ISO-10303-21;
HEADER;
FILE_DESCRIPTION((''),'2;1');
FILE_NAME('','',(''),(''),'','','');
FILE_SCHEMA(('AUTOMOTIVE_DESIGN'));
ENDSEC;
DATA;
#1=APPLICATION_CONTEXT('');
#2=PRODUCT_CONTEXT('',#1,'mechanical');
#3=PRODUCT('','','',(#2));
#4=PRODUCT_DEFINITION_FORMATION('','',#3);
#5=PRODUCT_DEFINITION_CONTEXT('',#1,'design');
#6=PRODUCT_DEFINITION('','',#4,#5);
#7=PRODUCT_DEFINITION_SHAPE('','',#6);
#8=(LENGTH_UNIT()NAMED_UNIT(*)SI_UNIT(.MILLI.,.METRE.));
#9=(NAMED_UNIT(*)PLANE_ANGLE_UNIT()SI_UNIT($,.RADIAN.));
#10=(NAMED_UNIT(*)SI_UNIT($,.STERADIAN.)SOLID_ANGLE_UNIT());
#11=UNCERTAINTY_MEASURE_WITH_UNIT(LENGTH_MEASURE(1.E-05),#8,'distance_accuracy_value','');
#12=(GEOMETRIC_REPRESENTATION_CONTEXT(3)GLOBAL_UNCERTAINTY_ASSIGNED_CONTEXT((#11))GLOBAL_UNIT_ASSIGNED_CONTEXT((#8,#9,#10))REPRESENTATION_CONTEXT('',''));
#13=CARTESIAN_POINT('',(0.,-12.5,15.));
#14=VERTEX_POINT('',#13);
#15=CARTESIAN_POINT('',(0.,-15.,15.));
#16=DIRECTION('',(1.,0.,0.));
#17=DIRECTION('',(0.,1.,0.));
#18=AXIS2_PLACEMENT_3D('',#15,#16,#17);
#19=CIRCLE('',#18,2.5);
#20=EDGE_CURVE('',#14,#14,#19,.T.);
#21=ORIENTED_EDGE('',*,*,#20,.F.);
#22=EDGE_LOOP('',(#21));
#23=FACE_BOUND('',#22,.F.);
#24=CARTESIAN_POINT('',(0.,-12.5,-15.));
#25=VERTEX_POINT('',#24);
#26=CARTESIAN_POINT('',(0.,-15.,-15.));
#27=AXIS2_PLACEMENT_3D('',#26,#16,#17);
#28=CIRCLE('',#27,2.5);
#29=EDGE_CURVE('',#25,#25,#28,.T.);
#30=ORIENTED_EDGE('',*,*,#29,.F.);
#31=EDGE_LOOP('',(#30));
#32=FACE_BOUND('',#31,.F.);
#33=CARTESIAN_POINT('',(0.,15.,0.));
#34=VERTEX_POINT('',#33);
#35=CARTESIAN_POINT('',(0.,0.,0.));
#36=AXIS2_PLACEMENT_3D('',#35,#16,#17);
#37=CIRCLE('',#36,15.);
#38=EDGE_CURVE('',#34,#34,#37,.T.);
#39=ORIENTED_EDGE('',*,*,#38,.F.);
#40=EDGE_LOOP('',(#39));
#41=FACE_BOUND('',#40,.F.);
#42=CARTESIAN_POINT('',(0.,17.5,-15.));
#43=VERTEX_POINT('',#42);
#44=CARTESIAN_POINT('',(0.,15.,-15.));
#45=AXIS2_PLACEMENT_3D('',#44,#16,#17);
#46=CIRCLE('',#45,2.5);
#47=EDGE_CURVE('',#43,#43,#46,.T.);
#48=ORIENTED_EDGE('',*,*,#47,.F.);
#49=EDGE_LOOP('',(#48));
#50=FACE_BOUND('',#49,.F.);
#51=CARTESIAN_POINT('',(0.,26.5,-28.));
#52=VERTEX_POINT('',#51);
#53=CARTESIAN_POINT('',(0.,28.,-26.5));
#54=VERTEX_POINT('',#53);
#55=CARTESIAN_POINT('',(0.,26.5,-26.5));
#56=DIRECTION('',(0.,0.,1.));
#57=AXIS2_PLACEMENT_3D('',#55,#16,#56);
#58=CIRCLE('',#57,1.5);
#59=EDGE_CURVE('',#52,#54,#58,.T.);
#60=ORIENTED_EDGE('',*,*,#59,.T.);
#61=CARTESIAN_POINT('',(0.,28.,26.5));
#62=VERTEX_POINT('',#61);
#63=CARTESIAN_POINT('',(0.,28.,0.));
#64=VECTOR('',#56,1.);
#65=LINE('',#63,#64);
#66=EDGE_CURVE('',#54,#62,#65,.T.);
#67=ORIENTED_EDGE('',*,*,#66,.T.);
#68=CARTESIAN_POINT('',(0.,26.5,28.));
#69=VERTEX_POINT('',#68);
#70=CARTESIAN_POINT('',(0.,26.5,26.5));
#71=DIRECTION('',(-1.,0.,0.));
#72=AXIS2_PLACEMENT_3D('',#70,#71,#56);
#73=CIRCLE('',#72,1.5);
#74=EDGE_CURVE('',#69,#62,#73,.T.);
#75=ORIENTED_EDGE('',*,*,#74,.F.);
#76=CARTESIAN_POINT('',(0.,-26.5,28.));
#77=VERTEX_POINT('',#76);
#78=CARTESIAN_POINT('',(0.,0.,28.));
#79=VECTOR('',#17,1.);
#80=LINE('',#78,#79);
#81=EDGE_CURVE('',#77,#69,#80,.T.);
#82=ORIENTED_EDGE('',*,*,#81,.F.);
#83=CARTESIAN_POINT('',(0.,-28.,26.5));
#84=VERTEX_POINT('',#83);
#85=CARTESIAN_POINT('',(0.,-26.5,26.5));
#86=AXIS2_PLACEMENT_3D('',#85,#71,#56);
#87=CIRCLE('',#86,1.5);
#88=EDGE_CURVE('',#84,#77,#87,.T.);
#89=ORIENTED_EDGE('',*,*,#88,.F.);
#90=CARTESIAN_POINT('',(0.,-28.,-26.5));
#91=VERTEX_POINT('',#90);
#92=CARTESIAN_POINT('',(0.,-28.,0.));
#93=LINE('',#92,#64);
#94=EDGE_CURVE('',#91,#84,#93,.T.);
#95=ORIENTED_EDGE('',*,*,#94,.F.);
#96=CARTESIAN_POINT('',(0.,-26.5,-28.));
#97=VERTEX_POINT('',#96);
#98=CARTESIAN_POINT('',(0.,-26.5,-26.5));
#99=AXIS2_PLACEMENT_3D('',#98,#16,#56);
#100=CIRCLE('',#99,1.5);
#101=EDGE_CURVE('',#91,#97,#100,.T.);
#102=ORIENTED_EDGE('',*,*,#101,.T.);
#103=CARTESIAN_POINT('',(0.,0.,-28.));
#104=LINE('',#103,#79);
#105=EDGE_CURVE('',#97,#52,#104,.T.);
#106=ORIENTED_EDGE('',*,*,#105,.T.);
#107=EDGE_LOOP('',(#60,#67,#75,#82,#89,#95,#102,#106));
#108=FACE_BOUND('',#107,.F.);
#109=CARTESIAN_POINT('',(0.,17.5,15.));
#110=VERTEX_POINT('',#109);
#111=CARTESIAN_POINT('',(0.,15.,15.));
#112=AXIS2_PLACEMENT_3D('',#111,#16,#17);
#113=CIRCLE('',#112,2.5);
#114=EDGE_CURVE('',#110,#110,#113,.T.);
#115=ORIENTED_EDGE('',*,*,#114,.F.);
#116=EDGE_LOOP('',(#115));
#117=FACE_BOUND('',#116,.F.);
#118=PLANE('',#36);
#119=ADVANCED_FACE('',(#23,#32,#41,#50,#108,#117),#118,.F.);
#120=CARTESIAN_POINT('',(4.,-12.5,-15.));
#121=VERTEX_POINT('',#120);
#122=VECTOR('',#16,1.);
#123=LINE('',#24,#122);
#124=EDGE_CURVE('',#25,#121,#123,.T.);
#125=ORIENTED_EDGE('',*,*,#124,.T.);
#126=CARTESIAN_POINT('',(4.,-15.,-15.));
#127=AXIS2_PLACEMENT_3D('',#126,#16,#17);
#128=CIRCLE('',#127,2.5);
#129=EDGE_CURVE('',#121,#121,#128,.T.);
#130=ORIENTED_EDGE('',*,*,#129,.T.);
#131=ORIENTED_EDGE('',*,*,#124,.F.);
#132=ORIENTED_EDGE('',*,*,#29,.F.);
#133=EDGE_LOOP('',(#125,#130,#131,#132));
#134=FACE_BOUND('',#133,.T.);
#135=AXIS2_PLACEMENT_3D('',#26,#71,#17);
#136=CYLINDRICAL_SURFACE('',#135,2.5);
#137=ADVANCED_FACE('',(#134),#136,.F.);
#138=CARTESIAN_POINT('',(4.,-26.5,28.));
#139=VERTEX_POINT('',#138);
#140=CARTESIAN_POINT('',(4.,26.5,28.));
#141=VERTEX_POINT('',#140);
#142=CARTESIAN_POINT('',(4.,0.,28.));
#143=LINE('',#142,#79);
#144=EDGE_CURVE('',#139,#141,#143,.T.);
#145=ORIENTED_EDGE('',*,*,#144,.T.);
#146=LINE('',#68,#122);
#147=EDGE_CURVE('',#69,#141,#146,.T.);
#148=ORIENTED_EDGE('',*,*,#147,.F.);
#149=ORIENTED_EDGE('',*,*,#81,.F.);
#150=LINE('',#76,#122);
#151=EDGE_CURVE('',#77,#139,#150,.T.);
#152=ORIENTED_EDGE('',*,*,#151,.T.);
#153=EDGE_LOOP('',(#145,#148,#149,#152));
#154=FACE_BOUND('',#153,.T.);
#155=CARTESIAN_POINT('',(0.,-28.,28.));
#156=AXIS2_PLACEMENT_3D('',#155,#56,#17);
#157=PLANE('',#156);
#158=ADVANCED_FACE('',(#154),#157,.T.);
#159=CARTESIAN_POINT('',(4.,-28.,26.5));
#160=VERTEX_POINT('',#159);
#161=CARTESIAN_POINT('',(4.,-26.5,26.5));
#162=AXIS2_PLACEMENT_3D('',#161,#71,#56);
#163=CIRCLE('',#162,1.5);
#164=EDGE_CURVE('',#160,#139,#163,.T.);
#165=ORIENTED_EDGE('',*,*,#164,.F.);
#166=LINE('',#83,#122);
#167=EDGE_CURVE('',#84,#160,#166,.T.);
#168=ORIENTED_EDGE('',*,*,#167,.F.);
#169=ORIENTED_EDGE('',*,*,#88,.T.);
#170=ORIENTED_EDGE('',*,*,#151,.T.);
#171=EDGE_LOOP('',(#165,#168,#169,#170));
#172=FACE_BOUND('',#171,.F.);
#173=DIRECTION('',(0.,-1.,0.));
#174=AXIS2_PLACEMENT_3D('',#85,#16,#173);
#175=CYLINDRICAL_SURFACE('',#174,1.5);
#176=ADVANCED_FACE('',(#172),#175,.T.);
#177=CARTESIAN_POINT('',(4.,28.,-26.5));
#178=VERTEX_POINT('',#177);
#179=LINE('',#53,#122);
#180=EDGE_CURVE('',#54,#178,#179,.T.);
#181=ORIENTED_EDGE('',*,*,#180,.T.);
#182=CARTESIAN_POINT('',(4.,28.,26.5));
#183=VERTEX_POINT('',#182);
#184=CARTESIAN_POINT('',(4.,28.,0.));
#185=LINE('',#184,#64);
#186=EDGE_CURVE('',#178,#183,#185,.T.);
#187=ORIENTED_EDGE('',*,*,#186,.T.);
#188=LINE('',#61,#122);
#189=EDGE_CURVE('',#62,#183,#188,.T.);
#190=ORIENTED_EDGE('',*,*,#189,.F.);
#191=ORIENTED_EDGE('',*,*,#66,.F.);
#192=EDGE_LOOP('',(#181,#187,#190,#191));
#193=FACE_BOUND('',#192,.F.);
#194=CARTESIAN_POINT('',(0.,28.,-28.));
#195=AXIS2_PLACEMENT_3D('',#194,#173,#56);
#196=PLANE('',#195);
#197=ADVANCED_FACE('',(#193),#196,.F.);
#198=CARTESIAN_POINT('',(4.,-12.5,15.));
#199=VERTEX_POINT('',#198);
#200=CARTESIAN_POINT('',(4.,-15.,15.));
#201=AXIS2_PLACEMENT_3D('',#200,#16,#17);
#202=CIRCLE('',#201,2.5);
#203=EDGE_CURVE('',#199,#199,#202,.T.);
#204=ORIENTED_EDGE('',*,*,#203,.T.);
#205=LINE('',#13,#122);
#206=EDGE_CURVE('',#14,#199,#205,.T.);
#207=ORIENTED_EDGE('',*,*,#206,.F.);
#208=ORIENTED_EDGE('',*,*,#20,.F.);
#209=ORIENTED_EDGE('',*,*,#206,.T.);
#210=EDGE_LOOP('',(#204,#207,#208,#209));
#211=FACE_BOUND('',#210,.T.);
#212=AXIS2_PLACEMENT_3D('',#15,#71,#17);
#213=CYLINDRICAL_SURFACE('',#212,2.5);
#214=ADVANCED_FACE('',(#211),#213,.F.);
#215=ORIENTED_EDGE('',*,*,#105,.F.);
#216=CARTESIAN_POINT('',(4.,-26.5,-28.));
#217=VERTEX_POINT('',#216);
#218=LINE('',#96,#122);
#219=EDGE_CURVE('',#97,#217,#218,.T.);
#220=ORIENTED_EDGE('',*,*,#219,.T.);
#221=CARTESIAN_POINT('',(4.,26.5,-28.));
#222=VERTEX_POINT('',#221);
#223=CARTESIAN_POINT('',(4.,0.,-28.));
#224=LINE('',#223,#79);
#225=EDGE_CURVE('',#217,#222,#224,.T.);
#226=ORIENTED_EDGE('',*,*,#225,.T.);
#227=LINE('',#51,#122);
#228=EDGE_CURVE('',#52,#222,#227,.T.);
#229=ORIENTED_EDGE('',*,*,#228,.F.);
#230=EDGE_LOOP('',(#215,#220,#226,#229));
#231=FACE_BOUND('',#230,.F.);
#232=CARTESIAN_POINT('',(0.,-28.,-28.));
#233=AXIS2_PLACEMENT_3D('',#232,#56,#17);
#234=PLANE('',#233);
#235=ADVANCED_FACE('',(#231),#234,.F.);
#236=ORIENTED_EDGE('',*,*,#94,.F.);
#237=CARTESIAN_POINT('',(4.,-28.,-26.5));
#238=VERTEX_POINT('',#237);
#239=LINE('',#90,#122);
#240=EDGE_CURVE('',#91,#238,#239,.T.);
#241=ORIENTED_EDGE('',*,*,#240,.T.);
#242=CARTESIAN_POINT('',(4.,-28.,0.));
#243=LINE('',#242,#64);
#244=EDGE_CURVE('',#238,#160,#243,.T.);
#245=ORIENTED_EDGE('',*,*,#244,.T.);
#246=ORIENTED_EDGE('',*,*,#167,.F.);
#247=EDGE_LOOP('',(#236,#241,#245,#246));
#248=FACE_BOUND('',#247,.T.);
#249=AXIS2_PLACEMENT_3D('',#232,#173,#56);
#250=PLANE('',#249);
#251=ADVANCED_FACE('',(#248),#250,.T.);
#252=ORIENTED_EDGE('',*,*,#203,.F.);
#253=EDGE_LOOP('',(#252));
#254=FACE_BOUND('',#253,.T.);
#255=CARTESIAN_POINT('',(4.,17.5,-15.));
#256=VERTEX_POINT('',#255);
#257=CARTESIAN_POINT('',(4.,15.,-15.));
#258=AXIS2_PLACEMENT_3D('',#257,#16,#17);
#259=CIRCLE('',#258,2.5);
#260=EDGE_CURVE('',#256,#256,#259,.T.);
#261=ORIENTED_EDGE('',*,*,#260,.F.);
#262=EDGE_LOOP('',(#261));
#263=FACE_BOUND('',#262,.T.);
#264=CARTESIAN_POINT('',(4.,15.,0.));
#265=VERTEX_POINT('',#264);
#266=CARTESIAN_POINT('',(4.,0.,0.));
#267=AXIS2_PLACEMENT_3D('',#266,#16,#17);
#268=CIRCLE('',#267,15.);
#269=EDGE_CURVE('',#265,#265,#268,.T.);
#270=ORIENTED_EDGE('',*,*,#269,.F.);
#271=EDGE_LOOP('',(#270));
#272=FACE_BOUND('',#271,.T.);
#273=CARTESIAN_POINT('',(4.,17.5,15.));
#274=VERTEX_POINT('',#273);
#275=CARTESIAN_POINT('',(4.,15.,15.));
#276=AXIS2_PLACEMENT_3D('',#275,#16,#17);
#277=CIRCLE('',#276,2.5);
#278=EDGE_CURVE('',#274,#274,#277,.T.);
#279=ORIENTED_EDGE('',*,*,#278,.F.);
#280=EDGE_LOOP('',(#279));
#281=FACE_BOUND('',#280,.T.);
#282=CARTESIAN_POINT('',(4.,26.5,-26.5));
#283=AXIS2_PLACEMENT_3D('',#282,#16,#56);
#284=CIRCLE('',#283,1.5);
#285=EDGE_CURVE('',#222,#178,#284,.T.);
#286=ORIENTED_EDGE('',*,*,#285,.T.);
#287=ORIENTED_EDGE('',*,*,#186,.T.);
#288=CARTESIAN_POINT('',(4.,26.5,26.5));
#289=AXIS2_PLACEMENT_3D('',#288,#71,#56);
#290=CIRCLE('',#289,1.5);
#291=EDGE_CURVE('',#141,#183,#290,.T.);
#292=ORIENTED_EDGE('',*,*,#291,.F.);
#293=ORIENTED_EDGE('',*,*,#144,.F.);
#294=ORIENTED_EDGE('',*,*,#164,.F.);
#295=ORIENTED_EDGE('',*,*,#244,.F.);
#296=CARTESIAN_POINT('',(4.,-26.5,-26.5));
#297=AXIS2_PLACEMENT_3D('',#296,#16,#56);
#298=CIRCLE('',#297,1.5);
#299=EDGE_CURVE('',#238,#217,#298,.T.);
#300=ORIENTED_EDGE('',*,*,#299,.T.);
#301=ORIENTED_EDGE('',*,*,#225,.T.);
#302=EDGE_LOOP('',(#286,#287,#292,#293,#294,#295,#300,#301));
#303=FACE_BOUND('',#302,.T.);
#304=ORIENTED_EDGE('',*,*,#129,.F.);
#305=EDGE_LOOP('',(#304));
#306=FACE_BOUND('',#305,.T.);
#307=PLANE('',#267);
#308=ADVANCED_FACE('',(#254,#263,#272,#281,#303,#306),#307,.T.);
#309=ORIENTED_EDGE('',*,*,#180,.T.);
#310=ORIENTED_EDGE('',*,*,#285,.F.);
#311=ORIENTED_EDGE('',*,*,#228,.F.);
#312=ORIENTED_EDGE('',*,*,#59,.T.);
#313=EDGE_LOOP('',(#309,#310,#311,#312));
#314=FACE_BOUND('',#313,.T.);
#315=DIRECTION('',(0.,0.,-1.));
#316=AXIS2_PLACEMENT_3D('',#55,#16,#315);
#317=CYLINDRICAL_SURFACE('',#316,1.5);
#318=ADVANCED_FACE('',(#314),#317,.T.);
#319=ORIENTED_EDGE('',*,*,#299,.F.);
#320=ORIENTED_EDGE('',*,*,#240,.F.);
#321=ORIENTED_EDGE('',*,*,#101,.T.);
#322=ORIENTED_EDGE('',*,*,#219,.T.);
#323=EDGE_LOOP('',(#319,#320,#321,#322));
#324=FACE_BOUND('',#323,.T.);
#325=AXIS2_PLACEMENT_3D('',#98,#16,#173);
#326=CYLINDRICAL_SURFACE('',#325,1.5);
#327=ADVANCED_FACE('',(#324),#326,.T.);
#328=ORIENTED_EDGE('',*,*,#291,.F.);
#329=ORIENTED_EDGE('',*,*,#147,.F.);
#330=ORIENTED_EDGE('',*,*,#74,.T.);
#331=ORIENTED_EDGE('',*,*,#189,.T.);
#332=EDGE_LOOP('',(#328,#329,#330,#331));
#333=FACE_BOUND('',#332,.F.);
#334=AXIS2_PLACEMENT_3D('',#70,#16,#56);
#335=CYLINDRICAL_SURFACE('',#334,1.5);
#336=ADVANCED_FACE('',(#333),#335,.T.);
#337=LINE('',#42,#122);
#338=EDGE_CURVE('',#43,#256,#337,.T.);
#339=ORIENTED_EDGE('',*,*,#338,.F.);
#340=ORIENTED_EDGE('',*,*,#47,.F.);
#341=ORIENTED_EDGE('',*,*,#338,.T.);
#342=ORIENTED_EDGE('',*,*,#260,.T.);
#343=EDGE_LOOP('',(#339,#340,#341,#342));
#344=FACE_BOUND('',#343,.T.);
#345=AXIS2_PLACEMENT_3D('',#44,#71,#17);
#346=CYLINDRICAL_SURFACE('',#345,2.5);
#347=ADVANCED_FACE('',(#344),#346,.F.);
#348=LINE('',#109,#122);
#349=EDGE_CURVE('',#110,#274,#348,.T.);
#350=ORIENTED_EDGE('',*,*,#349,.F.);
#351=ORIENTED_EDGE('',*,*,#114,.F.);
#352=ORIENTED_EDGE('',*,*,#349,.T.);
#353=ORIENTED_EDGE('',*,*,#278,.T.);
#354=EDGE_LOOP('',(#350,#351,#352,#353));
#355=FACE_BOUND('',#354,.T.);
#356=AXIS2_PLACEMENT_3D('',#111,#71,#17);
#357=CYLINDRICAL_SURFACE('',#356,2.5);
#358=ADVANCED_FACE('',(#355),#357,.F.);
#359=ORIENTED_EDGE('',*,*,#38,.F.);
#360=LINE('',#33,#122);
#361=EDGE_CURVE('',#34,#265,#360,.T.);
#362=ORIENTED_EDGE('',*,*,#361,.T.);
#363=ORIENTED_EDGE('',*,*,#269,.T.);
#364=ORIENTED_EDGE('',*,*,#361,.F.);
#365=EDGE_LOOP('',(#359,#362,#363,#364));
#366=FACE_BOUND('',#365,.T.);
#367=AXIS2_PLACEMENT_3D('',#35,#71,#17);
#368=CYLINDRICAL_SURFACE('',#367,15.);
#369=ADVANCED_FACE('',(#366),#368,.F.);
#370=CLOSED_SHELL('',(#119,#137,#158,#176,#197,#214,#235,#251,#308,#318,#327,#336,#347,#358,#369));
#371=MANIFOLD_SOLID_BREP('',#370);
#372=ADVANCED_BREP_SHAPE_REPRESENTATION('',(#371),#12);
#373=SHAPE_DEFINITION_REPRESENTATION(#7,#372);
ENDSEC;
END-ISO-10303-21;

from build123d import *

# Parameters (mm, degrees)
F0_W     = 56
F0_H     = 56
F0_R     = 2.5
F0_R_2   = 15
F1_DEPTH = 4
F2_R     = 1.5


# Not quite as in the source:
# - a feature names something its author has since deleted; it is built from what else it names


with BuildPart() as f1:
    # F0 (on Right) → F1 (new body)
    with BuildSketch(Plane.YZ):
        Rectangle(F0_W, F0_H)
        with Locations((-15, -15)):
            Circle(F0_R, mode=Mode.SUBTRACT)
        with Locations((15, -15)):
            Circle(F0_R, mode=Mode.SUBTRACT)
        with Locations((-15, 15)):
            Circle(F0_R, mode=Mode.SUBTRACT)
        Circle(F0_R_2, mode=Mode.SUBTRACT)
        with Locations((15, 15)):
            Circle(F0_R, mode=Mode.SUBTRACT)
    extrude(amount=F1_DEPTH)

    # F2
    f2_edges = [f1.edges().sort_by_distance(p)[0] for p in [
        (2, -28, 28),
        (2, -28, -28),
        (2, 28, -28),
        (2, 28, 28),
    ]]
    fillet(f2_edges, radius=F2_R)


with BuildPart() as f3_1:
    # F3: copy of F1
    add(f1.part)


solid = f1.part
